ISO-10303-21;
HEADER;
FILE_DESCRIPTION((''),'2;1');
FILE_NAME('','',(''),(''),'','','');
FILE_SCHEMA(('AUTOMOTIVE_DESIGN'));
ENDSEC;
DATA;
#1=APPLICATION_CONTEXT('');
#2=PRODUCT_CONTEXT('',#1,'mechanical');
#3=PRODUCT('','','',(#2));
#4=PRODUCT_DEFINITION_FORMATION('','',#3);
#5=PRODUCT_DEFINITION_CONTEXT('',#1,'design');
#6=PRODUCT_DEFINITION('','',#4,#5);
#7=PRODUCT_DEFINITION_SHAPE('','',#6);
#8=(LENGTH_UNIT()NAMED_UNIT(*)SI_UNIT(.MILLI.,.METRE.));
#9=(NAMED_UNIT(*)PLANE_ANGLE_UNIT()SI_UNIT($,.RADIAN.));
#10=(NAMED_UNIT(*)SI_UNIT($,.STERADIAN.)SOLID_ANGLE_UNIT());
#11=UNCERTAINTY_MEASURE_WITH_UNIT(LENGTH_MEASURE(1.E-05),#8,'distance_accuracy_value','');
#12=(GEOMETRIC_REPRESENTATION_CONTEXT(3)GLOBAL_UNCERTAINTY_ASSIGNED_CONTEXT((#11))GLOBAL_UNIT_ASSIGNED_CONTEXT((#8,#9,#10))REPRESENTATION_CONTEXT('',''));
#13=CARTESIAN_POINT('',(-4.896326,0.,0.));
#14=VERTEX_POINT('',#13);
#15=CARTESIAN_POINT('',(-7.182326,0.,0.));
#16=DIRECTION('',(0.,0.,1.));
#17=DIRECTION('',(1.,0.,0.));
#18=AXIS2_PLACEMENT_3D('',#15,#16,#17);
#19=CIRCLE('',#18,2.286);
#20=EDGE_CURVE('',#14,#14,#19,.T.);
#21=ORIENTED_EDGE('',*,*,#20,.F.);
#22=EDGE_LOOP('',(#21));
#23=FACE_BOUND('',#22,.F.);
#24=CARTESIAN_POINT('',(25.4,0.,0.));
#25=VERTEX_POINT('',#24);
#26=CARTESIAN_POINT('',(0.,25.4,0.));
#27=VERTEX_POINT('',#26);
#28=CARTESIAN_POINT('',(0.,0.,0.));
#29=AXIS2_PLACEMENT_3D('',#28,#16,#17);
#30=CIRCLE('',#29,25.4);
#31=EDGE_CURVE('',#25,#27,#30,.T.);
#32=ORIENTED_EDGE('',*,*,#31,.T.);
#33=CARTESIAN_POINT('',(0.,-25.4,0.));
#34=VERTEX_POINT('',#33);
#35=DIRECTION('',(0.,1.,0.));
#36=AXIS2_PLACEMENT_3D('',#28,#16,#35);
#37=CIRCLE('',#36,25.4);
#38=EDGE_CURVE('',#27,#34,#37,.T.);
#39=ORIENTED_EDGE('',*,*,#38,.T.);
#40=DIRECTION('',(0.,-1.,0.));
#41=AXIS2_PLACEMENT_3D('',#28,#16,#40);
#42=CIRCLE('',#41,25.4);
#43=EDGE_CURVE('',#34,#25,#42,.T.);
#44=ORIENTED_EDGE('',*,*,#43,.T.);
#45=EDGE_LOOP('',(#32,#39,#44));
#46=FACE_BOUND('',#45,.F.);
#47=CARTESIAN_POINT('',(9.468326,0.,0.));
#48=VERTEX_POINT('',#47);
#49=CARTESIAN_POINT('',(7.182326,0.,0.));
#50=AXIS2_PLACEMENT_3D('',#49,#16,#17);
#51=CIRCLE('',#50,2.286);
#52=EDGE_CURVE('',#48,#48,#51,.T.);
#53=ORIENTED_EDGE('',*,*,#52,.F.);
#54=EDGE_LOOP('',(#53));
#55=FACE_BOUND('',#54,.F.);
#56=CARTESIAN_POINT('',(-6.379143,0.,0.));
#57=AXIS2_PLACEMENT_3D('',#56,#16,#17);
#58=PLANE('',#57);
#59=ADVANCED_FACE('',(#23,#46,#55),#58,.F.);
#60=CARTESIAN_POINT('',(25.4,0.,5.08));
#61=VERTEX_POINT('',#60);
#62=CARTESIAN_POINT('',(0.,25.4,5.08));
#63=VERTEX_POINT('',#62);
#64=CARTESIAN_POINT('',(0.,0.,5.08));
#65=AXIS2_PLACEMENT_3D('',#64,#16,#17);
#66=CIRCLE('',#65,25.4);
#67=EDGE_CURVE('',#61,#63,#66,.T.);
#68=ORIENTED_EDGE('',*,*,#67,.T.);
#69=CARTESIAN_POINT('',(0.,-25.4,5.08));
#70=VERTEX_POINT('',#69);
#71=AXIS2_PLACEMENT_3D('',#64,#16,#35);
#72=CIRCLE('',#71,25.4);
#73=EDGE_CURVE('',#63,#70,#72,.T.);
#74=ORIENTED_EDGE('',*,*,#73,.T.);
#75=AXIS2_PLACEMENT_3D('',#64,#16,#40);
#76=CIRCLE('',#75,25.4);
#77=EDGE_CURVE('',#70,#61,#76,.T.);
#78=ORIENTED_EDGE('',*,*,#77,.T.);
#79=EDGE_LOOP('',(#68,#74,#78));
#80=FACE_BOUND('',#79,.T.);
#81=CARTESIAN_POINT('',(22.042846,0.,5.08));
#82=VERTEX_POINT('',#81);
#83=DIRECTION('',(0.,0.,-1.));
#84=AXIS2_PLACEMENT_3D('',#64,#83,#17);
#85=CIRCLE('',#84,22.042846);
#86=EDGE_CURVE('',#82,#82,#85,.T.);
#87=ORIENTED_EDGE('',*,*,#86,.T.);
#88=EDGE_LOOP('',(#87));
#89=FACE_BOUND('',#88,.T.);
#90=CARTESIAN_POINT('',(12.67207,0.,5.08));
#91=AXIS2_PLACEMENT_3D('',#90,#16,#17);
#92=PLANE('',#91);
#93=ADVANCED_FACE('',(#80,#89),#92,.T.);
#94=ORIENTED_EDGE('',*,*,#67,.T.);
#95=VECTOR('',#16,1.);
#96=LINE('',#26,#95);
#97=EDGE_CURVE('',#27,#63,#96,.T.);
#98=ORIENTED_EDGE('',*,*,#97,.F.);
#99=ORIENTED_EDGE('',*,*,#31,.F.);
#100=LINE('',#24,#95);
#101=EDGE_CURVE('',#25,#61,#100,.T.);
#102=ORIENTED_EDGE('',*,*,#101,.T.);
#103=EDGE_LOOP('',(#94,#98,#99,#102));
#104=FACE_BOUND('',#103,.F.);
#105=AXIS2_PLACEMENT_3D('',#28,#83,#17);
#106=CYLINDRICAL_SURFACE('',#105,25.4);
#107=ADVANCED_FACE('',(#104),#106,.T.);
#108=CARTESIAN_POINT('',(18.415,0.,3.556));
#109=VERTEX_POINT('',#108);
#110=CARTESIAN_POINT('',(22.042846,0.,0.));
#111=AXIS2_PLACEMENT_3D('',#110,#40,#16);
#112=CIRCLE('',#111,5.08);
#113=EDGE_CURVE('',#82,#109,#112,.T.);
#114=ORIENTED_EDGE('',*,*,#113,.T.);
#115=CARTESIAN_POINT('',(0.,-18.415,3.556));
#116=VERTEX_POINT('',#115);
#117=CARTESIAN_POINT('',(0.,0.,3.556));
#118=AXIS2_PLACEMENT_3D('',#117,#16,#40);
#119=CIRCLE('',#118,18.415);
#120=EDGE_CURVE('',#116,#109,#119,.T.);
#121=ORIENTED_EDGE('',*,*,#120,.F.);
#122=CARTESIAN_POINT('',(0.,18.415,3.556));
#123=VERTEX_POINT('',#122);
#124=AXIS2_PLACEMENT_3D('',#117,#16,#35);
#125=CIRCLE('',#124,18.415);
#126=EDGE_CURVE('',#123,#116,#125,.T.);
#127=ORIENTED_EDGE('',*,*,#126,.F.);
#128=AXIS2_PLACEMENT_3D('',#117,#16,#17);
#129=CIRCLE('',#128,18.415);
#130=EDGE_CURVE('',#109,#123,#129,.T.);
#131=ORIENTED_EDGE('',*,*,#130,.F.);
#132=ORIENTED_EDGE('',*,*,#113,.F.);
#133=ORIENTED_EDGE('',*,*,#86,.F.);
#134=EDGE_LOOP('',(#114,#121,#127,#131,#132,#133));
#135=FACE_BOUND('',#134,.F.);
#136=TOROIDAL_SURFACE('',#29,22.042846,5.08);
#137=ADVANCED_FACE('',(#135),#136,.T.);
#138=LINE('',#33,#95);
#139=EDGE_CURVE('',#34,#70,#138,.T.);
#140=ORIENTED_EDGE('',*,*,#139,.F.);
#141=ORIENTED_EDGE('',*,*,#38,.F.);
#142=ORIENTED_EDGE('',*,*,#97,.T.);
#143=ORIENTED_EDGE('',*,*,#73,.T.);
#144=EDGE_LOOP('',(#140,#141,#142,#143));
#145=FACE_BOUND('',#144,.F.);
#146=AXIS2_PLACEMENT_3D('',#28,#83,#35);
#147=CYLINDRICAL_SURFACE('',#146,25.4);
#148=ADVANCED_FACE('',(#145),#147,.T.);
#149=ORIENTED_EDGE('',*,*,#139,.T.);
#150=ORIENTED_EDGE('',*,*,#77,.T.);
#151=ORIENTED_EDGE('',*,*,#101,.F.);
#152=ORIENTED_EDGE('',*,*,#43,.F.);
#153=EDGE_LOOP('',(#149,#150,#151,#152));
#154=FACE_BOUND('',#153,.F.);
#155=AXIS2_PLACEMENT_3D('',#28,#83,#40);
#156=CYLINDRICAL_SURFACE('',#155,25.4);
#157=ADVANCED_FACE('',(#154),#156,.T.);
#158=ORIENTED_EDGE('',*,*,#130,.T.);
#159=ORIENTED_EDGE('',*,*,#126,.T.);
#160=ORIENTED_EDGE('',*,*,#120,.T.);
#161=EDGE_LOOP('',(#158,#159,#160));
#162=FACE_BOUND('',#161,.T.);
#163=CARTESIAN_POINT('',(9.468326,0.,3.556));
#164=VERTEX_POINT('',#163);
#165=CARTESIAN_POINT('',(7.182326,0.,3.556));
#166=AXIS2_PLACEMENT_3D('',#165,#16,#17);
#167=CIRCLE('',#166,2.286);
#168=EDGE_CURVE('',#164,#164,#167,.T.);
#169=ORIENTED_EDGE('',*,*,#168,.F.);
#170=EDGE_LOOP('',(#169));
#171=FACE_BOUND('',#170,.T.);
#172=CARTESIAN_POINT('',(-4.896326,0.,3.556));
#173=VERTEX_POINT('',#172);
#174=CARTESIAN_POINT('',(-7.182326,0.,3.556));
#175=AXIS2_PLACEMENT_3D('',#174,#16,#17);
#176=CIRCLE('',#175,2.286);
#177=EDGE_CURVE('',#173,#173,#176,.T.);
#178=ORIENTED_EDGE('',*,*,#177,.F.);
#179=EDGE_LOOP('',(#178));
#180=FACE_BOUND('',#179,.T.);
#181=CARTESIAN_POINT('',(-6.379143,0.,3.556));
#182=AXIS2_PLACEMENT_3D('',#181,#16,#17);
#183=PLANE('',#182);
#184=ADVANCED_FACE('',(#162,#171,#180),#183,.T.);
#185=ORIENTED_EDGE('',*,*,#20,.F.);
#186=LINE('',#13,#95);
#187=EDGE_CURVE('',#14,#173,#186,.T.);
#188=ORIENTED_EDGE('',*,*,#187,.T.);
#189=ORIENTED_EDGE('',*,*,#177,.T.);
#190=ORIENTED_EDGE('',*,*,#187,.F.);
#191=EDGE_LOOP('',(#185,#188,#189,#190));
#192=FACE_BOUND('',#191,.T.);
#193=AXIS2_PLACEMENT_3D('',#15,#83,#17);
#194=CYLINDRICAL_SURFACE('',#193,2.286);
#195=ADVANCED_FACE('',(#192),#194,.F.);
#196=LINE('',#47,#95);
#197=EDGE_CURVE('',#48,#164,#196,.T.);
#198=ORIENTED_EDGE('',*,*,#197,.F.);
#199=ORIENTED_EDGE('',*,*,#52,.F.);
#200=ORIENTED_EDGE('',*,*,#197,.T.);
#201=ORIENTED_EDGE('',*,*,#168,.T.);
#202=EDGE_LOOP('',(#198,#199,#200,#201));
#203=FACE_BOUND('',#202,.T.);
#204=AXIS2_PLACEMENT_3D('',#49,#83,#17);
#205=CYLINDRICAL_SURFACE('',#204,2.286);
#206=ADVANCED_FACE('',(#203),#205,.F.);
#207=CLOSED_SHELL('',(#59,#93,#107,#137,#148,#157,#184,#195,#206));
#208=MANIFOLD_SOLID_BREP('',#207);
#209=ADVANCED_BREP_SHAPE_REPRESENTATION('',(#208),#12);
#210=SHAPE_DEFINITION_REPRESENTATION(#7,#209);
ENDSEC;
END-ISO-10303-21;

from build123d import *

# Parameters (mm, degrees)
F1_DEPTH = 5.08
F0_R     = 2.286
F2_DEPTH = 3.556


# Not quite as in the source:
# - a fillet or chamfer that OpenCascade refuses, or shapes differently, is made with other operations: its cross-section is extruded or revolved along the edge and cut away or added


with BuildPart() as f1:
    # F0 (on Top) → F1 (new body)
    with BuildSketch(Plane.XY):
        with BuildLine():
            ThreePointArc((0, -25.4), (17.9605122421, -17.9605122421), (25.4, 0))
            ThreePointArc((25.4, 0), (17.9605122421, 17.9605122421), (0, 25.4))
            Line((0, 25.4), (0, 18.415))
            ThreePointArc((0, 18.415), (13.0213713756, 13.0213713756), (18.415, 0))
            ThreePointArc((18.415, 0), (13.0213713756, -13.0213713756), (0, -18.415))
            Line((0, -18.415), (0, -25.4))
        make_face()
        with BuildLine():
            Line((0, 18.415), (0, 25.4))
            ThreePointArc((0, 25.4), (-25.4, 0), (0, -25.4))
            Line((0, -25.4), (0, -18.415))
            ThreePointArc((0, -18.415), (-18.415, 0), (0, 18.415))
        make_face()
    extrude(amount=F1_DEPTH)

    # F0 (on Top) → F2 (join)
    with BuildSketch(Plane.XY):
        with BuildLine():
            Line((0, -18.415), (0, 18.415))
            ThreePointArc((0, 18.415), (-18.415, 0), (0, -18.415))
        make_face()
        with Locations((-7.1823259524, 0)):
            Circle(F0_R, mode=Mode.SUBTRACT)
        with BuildLine():
            ThreePointArc((18.415, 0), (13.0213713756, 13.0213713756), (0, 18.415))
            Line((0, 18.415), (0, -18.415))
            ThreePointArc((0, -18.415), (13.0213713756, -13.0213713756), (18.415, 0))
        make_face()
        with Locations((7.1823259524, 0)):
            Circle(F0_R, mode=Mode.SUBTRACT)
    extrude(amount=F2_DEPTH)

    # F3: fillet of radius 5.08 on 1 edges, made by hand

    # F3_s1 → F3_t2 (revolve, cut)
    with BuildSketch(Plane.XZ):
        with BuildLine():
            ThreePointArc((22.0428456417, 5.08), (20.0753701018, 4.6835285843), (18.415, 3.556))
            Line((18.415, 3.556), (18.415, 5.08))
            Line((18.415, 5.08), (22.0428456417, 5.08))
        make_face()
    revolve(axis=Axis((0, 0, 5.08), (0, 0, -1)), mode=Mode.SUBTRACT)


solid = f1.part
